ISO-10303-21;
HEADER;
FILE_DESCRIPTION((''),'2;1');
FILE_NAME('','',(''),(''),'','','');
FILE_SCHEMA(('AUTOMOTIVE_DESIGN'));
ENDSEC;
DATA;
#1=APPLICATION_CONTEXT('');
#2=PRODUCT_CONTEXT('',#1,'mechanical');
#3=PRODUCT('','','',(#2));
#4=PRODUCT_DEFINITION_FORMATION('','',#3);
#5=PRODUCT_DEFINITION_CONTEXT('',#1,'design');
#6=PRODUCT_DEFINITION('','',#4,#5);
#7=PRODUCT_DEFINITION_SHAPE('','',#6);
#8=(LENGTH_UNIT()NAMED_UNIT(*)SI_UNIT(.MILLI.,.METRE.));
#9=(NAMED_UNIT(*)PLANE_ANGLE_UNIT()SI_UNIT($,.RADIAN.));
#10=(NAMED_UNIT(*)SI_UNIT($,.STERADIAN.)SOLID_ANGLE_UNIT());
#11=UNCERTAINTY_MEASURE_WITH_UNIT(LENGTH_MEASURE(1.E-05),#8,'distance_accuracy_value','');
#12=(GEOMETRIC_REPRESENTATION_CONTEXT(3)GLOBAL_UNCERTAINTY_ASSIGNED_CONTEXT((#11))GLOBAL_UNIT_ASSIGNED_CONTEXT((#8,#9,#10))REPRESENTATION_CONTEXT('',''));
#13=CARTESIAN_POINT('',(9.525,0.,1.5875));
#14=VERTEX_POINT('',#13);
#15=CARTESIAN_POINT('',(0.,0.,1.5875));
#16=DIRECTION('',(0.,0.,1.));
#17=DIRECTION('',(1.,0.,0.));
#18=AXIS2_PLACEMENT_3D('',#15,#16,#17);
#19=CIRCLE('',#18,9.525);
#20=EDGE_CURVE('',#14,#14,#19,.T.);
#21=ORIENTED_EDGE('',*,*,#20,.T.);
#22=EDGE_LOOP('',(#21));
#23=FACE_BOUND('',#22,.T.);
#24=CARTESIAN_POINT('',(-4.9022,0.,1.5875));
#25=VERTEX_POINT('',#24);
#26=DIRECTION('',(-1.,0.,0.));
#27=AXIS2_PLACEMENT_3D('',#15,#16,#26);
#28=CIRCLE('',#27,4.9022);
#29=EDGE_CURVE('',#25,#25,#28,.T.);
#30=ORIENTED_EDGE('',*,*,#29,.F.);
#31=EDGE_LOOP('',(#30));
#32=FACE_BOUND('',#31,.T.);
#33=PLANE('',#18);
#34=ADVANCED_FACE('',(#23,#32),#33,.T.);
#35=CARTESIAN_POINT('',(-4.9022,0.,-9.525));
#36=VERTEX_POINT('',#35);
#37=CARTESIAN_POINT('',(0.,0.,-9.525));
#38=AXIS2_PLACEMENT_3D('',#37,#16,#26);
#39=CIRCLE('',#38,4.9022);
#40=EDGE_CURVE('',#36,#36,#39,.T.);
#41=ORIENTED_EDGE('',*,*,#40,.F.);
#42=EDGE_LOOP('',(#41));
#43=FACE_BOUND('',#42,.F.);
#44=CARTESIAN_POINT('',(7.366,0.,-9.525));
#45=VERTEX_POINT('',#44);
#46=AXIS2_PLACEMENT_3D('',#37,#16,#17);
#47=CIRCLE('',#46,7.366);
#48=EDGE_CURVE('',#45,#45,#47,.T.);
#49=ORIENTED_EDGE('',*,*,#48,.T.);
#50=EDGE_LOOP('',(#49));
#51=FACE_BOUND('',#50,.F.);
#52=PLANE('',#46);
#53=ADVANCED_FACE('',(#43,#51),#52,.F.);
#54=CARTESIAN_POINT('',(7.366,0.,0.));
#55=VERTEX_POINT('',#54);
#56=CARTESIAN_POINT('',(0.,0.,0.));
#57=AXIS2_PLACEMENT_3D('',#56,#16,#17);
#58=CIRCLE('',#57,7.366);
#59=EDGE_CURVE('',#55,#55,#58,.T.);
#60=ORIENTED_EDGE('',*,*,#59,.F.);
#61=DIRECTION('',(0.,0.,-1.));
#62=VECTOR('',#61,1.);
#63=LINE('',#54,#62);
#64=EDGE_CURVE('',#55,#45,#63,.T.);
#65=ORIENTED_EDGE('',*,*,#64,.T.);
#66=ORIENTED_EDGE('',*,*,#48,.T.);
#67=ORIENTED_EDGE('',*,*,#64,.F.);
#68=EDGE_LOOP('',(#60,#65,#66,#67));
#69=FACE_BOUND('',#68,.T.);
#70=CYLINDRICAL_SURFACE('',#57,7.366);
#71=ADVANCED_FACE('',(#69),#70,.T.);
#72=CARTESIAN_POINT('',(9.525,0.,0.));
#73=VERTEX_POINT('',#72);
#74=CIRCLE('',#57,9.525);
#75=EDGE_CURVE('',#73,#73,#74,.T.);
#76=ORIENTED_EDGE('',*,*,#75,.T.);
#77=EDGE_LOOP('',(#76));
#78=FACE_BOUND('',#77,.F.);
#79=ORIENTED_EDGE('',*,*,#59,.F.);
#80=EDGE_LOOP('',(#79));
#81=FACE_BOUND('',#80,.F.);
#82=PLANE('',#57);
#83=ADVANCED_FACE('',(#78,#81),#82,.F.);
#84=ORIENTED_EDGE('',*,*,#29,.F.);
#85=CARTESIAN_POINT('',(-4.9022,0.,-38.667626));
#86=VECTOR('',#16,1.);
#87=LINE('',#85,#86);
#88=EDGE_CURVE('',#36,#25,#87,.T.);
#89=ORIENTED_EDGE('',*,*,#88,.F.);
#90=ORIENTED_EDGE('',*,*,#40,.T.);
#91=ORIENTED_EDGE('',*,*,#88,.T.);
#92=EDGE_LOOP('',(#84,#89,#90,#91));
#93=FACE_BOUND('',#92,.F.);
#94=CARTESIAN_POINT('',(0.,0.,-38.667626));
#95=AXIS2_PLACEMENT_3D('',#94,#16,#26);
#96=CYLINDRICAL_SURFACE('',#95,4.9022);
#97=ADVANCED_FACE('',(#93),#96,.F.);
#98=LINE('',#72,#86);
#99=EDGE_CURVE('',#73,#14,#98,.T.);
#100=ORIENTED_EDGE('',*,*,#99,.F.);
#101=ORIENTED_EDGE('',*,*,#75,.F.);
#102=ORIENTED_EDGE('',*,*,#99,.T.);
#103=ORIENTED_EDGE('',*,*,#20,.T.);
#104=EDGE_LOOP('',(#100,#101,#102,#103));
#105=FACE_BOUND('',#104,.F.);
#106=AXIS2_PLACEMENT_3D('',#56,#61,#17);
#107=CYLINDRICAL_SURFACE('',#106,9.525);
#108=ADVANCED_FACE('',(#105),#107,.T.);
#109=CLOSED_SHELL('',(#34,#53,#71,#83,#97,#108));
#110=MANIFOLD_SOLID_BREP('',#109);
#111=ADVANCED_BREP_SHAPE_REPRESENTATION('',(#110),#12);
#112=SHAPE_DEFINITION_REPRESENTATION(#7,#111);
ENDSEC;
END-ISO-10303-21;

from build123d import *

# Parameters (mm, degrees)
F2_R     = 7.366
F3_DEPTH = 9.525
F4_R     = 9.525
F5_DEPTH = 1.5875
F8_D     = 9.8044


# Not quite as in the source:
# - a feature of the source that left no trace in its solid (it failed there, or was rolled back) is left out


with BuildPart() as f3:
    # F2 (on Top) → F3 (new body, through all)
    with BuildSketch(Plane.XY):
        Circle(F2_R)
    extrude(amount=-F3_DEPTH)

    # F4 (on Top) → F5 (join, through all)
    with BuildSketch(Plane.XY):
        Circle(F4_R)
    extrude(amount=F5_DEPTH)

    # F8 (through all)
    with Locations(Plane(origin=(0, 0, -9.525), x_dir=(1, 0, 0), z_dir=(0, 0, -1))):
        with Locations((0, 0)):
            Hole(F8_D / 2)


solid = f3.part
